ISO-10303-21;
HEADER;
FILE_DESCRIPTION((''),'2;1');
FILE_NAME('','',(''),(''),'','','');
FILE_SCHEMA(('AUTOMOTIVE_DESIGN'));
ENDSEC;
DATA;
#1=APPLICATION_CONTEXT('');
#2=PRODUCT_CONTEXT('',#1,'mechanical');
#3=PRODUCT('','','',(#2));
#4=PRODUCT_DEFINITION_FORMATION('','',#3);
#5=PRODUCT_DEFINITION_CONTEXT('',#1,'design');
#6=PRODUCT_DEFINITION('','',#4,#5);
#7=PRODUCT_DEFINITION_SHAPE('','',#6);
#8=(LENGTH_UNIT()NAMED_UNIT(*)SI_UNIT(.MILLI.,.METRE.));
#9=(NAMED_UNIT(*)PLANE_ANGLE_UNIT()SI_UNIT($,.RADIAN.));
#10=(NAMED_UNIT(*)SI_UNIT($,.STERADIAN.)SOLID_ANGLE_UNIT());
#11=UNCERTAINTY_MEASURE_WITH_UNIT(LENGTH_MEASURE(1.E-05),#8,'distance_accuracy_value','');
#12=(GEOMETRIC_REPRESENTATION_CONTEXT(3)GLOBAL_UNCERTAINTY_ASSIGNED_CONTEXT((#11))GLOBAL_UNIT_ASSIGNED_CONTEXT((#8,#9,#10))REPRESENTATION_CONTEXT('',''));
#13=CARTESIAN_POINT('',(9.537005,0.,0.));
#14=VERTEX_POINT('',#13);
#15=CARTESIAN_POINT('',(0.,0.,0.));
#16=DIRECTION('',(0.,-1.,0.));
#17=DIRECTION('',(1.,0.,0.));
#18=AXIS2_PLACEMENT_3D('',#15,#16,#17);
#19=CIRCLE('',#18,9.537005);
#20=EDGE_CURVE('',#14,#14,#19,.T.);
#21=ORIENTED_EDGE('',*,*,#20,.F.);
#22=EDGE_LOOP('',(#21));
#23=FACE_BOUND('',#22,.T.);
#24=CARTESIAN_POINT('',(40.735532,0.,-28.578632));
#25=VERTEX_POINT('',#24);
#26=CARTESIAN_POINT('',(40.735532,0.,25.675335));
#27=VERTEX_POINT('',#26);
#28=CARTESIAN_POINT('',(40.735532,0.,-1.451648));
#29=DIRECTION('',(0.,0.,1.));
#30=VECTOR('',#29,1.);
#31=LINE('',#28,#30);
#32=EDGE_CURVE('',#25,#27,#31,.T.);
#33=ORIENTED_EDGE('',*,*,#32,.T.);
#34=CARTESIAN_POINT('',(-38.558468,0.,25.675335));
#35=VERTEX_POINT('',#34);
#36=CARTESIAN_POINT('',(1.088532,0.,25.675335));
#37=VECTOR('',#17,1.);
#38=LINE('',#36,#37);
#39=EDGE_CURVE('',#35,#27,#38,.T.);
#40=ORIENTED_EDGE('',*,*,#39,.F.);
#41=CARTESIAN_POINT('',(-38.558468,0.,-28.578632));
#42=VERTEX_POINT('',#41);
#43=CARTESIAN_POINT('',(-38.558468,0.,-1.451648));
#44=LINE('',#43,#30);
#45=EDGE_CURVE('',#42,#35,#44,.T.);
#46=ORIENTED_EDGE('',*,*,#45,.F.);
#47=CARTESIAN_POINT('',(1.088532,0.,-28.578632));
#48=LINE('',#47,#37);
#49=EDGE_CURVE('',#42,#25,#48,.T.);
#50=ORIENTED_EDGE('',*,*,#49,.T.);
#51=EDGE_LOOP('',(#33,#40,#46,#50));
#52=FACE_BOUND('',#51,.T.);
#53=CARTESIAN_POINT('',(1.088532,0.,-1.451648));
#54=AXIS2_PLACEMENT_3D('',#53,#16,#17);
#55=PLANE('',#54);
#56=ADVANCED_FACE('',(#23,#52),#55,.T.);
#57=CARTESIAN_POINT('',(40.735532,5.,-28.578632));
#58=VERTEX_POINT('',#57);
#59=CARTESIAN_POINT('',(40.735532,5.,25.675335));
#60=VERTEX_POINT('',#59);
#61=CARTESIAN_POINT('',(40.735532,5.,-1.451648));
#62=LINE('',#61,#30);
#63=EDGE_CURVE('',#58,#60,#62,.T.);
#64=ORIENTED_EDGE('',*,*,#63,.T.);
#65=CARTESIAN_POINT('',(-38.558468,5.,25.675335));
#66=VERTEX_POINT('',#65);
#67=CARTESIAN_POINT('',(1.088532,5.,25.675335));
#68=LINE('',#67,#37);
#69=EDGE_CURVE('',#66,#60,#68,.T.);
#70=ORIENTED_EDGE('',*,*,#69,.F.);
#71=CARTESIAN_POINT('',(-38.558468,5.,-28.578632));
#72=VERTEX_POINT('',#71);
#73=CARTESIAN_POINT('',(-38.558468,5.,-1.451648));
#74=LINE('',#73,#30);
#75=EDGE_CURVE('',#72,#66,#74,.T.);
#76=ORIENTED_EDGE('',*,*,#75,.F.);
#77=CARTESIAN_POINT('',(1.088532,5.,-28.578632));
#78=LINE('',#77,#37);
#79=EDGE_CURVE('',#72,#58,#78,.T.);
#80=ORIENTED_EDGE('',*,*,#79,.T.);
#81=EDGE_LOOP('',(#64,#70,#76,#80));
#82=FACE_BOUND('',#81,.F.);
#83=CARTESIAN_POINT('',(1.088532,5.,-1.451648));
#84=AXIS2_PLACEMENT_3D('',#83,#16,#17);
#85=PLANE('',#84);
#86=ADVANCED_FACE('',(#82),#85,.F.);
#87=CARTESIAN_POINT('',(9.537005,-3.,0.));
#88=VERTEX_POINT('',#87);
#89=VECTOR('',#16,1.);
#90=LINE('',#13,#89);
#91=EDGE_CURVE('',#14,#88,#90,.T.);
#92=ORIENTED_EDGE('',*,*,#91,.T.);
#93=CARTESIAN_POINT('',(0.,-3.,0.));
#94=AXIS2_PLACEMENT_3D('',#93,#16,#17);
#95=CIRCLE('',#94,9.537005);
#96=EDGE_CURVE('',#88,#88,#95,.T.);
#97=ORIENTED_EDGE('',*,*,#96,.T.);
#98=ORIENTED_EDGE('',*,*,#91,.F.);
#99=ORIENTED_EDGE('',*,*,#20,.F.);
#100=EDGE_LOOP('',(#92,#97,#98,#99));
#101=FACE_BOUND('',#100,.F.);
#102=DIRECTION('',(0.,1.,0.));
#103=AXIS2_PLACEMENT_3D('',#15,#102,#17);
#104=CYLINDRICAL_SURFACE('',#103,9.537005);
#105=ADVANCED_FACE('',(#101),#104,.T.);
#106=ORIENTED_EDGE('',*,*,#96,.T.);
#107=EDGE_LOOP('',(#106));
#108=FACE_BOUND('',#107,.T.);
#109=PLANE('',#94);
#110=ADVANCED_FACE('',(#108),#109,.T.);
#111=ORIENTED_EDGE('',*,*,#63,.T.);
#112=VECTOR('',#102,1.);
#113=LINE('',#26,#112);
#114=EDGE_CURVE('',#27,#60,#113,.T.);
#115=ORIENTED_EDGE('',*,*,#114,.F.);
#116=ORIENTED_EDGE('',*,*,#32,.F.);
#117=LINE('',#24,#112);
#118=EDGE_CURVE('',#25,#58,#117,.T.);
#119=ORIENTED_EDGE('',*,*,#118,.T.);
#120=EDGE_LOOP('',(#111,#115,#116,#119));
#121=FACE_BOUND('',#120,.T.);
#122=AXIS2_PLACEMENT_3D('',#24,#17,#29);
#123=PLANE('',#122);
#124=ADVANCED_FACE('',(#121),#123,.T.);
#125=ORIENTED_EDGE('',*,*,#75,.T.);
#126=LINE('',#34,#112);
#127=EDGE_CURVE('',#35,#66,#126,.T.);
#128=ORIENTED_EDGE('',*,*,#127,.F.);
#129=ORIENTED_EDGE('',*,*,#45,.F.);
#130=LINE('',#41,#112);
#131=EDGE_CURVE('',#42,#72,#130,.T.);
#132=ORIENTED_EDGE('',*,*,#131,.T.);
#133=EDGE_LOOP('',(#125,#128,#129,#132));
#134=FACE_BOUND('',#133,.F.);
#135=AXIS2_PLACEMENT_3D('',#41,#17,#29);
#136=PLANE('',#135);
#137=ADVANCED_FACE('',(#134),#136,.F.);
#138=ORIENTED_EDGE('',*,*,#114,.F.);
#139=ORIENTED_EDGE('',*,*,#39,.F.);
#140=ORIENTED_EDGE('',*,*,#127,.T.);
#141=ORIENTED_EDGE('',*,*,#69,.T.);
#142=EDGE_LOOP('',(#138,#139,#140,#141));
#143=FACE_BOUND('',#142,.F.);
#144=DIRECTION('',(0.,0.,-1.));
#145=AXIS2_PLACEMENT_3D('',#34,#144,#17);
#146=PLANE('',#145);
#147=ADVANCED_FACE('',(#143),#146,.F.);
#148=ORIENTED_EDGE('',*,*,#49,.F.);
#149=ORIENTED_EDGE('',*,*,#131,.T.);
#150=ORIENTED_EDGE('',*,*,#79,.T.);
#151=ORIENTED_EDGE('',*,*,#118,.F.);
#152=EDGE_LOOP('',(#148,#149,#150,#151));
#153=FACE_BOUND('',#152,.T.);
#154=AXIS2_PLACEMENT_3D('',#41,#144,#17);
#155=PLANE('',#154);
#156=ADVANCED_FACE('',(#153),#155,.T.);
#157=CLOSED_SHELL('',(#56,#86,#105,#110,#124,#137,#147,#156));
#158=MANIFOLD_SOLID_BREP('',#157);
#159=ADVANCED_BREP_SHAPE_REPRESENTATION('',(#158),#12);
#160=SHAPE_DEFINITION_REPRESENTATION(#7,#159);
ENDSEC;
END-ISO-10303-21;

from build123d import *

# Parameters (mm, degrees)
F0_W     = 79.294
F0_H     = 54.2539670305
F1_DEPTH = 5
F2_R     = 9.5370045267
F3_DEPTH = 3


# Not quite as in the source:
# - the program builds the solid bodies; features that only make, move or delete a surface that nothing else refers to are left out


with BuildPart() as f1:
    # F0 (on Front) → F1 (new body)
    with BuildSketch(Plane.XZ):
        with Locations((1.0885317774, -1.4516480646)):
            Rectangle(F0_W, F0_H)
    extrude(amount=-F1_DEPTH)

    # F2 (on face) → F3 (join)
    with BuildSketch(Plane.XZ):
        Circle(F2_R)
    extrude(amount=F3_DEPTH)


solid = f1.part
